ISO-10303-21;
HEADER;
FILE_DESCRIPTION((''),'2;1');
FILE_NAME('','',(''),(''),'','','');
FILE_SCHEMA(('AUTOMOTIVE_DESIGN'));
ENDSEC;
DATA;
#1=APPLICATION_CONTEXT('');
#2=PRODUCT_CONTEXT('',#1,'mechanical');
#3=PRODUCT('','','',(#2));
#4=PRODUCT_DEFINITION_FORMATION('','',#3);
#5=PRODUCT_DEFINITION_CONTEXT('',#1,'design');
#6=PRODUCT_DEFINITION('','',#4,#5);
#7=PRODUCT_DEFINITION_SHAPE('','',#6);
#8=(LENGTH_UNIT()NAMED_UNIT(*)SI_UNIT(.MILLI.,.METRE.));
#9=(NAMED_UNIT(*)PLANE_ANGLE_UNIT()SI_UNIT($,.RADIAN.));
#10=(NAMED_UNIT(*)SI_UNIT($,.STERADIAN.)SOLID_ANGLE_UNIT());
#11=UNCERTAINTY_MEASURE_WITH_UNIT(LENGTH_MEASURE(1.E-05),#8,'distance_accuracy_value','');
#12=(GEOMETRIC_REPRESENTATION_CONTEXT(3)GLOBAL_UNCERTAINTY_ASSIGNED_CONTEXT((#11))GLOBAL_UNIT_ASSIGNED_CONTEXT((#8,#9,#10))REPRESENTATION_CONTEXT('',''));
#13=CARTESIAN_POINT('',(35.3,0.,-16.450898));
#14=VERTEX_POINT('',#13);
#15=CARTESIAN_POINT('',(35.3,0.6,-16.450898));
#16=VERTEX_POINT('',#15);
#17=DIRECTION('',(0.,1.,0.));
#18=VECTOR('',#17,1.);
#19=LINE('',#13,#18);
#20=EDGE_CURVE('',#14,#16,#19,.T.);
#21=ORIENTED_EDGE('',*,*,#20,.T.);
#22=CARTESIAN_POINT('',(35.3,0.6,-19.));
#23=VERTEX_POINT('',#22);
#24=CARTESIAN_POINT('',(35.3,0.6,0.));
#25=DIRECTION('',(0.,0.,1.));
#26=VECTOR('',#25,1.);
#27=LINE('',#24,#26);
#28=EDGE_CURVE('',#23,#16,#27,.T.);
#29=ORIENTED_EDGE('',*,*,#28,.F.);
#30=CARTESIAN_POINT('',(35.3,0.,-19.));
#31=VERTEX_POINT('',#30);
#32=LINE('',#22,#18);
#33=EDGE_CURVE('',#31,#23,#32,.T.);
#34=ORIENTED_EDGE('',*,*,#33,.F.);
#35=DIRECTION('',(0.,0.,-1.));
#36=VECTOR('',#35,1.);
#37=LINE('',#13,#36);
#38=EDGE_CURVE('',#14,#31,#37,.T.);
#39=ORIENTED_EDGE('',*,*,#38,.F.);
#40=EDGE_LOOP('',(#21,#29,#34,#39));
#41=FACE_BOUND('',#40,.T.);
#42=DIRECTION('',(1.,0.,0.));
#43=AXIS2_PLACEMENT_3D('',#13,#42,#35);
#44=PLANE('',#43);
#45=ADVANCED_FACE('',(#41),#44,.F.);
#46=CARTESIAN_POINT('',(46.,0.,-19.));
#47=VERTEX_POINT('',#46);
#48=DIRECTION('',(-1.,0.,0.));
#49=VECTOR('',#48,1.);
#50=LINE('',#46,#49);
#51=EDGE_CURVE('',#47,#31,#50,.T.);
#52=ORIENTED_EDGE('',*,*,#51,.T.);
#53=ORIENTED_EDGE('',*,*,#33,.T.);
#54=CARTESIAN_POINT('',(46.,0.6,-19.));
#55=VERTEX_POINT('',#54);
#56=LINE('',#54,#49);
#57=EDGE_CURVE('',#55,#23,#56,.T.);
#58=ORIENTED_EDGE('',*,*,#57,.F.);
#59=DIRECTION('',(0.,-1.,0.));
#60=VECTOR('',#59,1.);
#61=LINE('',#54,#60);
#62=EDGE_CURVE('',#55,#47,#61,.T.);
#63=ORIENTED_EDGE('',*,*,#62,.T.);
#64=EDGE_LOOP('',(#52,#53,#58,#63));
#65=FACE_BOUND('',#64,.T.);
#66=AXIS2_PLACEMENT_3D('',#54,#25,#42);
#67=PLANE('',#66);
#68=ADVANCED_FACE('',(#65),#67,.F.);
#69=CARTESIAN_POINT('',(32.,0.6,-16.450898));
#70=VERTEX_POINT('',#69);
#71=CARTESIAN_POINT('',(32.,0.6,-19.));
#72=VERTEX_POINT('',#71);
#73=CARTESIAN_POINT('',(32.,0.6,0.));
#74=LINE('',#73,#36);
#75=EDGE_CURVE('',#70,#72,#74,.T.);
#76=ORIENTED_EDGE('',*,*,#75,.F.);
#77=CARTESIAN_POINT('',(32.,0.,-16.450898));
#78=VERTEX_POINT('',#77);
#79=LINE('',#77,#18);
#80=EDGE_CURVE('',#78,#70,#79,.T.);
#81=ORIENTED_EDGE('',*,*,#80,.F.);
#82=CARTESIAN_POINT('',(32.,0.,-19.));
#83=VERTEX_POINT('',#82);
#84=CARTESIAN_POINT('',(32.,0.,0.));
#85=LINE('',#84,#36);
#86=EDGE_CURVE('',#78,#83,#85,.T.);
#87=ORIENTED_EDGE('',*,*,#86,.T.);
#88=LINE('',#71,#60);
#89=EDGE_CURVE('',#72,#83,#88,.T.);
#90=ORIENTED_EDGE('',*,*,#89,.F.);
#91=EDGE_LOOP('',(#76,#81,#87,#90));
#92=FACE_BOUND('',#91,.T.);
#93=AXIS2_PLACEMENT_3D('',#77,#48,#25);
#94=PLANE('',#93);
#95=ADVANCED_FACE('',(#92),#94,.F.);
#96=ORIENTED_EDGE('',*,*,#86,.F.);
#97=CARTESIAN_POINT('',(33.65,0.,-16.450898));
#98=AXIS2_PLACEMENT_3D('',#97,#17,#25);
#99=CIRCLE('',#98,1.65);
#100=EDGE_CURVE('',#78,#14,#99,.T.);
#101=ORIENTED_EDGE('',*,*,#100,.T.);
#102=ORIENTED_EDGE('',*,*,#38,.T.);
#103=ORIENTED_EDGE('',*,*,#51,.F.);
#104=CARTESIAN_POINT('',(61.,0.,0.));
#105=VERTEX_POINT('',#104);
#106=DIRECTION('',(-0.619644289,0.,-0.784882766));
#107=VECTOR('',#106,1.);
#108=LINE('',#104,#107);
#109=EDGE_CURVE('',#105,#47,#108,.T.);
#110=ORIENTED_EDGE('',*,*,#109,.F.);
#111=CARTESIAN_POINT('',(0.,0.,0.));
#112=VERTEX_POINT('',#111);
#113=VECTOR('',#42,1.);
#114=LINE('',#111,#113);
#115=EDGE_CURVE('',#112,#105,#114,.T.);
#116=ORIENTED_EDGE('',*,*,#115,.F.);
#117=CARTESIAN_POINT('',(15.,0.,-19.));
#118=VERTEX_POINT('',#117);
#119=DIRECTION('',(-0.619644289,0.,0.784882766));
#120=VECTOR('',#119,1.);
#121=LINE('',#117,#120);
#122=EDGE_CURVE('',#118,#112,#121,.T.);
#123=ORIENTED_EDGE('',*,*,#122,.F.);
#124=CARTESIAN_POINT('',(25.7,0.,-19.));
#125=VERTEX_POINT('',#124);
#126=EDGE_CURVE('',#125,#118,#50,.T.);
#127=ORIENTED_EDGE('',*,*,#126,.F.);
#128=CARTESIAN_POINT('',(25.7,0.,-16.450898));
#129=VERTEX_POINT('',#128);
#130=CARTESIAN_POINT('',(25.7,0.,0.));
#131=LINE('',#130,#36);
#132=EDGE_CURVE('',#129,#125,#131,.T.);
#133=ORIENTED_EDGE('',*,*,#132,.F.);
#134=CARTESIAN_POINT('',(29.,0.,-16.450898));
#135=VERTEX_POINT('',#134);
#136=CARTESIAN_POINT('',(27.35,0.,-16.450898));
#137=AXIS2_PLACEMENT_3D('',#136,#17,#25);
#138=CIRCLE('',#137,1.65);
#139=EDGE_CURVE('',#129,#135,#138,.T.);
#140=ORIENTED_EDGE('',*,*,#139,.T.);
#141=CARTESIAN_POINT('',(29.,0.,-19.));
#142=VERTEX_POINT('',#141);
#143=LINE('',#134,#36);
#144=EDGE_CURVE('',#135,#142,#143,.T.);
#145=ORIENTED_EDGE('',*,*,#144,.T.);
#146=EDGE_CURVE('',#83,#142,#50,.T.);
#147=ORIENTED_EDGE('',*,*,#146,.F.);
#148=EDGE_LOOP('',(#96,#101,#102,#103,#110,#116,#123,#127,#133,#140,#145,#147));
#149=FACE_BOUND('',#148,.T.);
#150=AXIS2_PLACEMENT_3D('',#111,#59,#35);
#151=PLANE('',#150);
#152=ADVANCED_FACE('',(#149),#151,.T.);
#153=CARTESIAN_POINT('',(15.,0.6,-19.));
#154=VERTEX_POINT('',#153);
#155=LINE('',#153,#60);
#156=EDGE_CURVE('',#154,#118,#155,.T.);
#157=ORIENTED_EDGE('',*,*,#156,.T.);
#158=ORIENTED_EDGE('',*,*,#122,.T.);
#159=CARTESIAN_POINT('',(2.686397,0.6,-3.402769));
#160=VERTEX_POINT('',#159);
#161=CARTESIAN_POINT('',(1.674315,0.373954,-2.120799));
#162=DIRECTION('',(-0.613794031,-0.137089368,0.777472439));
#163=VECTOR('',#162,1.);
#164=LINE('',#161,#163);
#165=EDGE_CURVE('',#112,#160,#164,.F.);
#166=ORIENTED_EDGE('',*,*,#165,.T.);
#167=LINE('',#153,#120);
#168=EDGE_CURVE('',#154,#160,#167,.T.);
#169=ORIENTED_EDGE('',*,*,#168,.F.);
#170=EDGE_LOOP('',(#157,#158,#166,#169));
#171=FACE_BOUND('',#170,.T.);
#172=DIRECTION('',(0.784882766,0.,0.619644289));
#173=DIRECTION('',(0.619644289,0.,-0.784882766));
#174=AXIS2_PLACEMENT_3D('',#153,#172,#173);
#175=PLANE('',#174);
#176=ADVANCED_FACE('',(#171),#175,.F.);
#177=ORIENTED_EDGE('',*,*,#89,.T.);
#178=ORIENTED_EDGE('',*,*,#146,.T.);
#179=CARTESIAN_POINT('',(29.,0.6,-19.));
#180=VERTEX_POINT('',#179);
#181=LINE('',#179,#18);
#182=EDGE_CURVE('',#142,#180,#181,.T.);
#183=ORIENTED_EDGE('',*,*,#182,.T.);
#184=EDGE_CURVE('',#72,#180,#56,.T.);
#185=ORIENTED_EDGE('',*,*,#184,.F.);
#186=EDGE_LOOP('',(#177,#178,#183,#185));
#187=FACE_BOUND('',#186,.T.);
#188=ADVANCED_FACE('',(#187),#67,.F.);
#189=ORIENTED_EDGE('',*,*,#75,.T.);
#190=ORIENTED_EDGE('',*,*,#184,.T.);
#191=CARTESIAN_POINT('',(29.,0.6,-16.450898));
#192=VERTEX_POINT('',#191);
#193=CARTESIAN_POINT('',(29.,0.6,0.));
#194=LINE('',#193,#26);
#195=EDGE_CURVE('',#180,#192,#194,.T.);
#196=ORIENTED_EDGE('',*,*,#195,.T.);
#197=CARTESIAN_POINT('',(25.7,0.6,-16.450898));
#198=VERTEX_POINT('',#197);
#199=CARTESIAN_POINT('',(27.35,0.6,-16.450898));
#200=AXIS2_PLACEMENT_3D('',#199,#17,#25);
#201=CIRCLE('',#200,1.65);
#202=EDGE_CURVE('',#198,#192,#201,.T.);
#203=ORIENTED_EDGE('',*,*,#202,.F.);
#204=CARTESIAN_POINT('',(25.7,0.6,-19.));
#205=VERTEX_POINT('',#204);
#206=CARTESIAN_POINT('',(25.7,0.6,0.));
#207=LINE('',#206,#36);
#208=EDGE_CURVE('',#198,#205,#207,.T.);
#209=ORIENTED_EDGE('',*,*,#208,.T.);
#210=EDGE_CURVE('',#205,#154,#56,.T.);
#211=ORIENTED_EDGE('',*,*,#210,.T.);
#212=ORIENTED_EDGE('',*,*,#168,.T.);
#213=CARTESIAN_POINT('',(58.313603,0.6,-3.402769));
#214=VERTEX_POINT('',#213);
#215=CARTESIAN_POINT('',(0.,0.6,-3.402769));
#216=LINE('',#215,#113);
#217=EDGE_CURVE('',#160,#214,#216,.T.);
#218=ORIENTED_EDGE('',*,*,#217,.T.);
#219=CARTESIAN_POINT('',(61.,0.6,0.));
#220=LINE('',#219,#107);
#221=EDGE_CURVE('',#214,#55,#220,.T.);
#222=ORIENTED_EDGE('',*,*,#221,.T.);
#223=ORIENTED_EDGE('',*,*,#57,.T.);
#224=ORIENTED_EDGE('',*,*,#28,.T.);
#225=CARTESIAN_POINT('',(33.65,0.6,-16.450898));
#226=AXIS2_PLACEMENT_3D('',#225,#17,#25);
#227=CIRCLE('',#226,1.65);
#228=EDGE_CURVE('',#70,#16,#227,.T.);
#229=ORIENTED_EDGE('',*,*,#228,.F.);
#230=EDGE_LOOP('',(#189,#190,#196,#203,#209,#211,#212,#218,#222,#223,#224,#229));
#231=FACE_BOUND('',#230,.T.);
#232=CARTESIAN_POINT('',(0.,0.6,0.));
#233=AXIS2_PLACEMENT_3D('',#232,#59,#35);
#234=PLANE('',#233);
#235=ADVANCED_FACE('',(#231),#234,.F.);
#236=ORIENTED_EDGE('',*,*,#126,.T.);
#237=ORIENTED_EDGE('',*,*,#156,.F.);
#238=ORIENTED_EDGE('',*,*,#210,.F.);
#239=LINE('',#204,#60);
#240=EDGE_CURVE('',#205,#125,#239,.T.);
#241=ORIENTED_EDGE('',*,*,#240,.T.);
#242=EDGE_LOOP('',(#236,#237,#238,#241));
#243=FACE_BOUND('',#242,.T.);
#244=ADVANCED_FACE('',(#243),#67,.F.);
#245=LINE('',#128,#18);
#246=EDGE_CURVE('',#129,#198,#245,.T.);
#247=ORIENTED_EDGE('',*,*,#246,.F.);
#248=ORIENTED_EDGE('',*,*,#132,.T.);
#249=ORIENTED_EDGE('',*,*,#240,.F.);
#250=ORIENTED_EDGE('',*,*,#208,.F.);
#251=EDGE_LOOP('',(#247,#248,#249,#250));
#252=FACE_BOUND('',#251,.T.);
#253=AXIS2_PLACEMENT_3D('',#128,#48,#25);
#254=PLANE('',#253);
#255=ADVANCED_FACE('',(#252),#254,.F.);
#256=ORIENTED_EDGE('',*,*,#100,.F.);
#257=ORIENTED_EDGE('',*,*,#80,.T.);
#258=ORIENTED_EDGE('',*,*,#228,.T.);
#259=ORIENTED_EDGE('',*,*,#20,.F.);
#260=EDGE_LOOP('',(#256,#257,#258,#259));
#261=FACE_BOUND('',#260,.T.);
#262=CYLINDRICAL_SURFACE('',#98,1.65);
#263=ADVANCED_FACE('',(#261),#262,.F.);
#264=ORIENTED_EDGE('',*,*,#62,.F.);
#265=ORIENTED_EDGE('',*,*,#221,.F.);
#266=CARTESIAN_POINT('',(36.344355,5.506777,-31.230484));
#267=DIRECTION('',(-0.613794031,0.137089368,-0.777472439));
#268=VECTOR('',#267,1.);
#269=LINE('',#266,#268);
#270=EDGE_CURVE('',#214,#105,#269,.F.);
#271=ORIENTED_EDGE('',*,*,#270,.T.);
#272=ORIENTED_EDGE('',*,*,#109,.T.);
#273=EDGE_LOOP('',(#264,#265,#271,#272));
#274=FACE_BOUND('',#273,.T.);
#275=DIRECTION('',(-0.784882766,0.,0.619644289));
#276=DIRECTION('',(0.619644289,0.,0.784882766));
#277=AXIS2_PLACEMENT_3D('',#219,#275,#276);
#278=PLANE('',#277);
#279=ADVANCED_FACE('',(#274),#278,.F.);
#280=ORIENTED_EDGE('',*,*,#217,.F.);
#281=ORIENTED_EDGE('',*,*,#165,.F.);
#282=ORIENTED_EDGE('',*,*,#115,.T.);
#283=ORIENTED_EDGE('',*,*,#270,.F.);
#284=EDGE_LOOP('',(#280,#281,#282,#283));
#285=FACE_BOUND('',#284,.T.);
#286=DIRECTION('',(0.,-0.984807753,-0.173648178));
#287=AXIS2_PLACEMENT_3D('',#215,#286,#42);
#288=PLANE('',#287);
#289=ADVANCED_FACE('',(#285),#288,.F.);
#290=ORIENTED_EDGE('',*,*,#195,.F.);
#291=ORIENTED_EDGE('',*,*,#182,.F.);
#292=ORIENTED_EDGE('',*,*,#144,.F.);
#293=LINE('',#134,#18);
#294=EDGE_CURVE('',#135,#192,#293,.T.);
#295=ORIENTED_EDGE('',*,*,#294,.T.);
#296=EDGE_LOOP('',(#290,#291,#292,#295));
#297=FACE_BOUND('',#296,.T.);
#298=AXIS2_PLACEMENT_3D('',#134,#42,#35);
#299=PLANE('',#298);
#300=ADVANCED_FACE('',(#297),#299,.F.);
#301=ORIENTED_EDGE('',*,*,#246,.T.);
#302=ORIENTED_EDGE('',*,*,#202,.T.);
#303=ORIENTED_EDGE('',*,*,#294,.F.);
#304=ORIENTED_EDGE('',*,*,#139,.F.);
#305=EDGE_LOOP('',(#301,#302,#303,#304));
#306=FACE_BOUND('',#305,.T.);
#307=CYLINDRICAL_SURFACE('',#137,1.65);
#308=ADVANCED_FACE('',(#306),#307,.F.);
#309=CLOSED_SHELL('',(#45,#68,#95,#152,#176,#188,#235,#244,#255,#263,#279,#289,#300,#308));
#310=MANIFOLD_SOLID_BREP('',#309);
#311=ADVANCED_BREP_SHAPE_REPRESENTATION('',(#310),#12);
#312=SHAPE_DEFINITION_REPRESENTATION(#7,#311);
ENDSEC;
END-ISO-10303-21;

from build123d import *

# Parameters (mm, degrees)
BOSS_EXTRUDE1_DEPTH     = 0.6
CHAMFER1_SIZE           = 0.6
CHAMFER1_SIZE_2         = 3.402769092
CUT_EXTRUDE1_DEPTH      = 64.893348637
CUT_EXTRUDE1_DEPTH_BACK = 64.893348637


with BuildPart() as part:
    # Sketch1 → Boss-Extrude1 (new body)
    with BuildSketch(Plane(origin=(0, 0, 0), x_dir=(1, 0, 0), z_dir=(0, 1, 0))):
        Polygon((0, 0), (61, 0), (46, 19), (15, 19), align=None)
    extrude(amount=BOSS_EXTRUDE1_DEPTH)

    # Chamfer1
    # the kernel refuses this chamfer: 3.402769092, 0.6 mm, written as the material it takes off along each edge
    with BuildSketch(Plane(origin=(-8.8422275, 0.6, 0), x_dir=(0, -0.9776715712462579, 0.2101387607674348), z_dir=(1, 0, 0))) as chamfer1_piece_1:
        Polygon((CHAMFER1_SIZE * 0.977671571246, CHAMFER1_SIZE * 0.210138760767), (-CHAMFER1_SIZE_2 * 0.210138760753, CHAMFER1_SIZE_2 * 0.97767157118), (0, 0), align=None)
    extrude(amount=78.684455, mode=Mode.SUBTRACT)

    # Sketch2 → Cut-Extrude1 (cut, two sides: drawn at the far end of the back side and taken through both)
    with BuildSketch(Plane(origin=(0, 0.6, 0), x_dir=(1, 0, 0), z_dir=(0, 1, 0)).offset(-CUT_EXTRUDE1_DEPTH_BACK)):
        with BuildLine():
            Line((25.7, 16.450898266), (25.7, 22.487224665))
            ThreePointArc((25.7, 22.487224665), (27.35, 24.137224665), (29, 22.487224665))
            Line((29, 22.487224665), (29, 16.450898266))
            ThreePointArc((29, 16.450898266), (27.35, 14.800898266), (25.7, 16.450898266))
        make_face()
        with BuildLine():
            Line((32, 16.450898266), (32, 22.487224665))
            ThreePointArc((32, 22.487224665), (33.65, 24.137224665), (35.3, 22.487224665))
            Line((35.3, 22.487224665), (35.3, 16.450898266))
            ThreePointArc((35.3, 16.450898266), (33.65, 14.800898266), (32, 16.450898266))
        make_face()
    extrude(amount=CUT_EXTRUDE1_DEPTH + CUT_EXTRUDE1_DEPTH_BACK, mode=Mode.SUBTRACT)


solid = part.part
